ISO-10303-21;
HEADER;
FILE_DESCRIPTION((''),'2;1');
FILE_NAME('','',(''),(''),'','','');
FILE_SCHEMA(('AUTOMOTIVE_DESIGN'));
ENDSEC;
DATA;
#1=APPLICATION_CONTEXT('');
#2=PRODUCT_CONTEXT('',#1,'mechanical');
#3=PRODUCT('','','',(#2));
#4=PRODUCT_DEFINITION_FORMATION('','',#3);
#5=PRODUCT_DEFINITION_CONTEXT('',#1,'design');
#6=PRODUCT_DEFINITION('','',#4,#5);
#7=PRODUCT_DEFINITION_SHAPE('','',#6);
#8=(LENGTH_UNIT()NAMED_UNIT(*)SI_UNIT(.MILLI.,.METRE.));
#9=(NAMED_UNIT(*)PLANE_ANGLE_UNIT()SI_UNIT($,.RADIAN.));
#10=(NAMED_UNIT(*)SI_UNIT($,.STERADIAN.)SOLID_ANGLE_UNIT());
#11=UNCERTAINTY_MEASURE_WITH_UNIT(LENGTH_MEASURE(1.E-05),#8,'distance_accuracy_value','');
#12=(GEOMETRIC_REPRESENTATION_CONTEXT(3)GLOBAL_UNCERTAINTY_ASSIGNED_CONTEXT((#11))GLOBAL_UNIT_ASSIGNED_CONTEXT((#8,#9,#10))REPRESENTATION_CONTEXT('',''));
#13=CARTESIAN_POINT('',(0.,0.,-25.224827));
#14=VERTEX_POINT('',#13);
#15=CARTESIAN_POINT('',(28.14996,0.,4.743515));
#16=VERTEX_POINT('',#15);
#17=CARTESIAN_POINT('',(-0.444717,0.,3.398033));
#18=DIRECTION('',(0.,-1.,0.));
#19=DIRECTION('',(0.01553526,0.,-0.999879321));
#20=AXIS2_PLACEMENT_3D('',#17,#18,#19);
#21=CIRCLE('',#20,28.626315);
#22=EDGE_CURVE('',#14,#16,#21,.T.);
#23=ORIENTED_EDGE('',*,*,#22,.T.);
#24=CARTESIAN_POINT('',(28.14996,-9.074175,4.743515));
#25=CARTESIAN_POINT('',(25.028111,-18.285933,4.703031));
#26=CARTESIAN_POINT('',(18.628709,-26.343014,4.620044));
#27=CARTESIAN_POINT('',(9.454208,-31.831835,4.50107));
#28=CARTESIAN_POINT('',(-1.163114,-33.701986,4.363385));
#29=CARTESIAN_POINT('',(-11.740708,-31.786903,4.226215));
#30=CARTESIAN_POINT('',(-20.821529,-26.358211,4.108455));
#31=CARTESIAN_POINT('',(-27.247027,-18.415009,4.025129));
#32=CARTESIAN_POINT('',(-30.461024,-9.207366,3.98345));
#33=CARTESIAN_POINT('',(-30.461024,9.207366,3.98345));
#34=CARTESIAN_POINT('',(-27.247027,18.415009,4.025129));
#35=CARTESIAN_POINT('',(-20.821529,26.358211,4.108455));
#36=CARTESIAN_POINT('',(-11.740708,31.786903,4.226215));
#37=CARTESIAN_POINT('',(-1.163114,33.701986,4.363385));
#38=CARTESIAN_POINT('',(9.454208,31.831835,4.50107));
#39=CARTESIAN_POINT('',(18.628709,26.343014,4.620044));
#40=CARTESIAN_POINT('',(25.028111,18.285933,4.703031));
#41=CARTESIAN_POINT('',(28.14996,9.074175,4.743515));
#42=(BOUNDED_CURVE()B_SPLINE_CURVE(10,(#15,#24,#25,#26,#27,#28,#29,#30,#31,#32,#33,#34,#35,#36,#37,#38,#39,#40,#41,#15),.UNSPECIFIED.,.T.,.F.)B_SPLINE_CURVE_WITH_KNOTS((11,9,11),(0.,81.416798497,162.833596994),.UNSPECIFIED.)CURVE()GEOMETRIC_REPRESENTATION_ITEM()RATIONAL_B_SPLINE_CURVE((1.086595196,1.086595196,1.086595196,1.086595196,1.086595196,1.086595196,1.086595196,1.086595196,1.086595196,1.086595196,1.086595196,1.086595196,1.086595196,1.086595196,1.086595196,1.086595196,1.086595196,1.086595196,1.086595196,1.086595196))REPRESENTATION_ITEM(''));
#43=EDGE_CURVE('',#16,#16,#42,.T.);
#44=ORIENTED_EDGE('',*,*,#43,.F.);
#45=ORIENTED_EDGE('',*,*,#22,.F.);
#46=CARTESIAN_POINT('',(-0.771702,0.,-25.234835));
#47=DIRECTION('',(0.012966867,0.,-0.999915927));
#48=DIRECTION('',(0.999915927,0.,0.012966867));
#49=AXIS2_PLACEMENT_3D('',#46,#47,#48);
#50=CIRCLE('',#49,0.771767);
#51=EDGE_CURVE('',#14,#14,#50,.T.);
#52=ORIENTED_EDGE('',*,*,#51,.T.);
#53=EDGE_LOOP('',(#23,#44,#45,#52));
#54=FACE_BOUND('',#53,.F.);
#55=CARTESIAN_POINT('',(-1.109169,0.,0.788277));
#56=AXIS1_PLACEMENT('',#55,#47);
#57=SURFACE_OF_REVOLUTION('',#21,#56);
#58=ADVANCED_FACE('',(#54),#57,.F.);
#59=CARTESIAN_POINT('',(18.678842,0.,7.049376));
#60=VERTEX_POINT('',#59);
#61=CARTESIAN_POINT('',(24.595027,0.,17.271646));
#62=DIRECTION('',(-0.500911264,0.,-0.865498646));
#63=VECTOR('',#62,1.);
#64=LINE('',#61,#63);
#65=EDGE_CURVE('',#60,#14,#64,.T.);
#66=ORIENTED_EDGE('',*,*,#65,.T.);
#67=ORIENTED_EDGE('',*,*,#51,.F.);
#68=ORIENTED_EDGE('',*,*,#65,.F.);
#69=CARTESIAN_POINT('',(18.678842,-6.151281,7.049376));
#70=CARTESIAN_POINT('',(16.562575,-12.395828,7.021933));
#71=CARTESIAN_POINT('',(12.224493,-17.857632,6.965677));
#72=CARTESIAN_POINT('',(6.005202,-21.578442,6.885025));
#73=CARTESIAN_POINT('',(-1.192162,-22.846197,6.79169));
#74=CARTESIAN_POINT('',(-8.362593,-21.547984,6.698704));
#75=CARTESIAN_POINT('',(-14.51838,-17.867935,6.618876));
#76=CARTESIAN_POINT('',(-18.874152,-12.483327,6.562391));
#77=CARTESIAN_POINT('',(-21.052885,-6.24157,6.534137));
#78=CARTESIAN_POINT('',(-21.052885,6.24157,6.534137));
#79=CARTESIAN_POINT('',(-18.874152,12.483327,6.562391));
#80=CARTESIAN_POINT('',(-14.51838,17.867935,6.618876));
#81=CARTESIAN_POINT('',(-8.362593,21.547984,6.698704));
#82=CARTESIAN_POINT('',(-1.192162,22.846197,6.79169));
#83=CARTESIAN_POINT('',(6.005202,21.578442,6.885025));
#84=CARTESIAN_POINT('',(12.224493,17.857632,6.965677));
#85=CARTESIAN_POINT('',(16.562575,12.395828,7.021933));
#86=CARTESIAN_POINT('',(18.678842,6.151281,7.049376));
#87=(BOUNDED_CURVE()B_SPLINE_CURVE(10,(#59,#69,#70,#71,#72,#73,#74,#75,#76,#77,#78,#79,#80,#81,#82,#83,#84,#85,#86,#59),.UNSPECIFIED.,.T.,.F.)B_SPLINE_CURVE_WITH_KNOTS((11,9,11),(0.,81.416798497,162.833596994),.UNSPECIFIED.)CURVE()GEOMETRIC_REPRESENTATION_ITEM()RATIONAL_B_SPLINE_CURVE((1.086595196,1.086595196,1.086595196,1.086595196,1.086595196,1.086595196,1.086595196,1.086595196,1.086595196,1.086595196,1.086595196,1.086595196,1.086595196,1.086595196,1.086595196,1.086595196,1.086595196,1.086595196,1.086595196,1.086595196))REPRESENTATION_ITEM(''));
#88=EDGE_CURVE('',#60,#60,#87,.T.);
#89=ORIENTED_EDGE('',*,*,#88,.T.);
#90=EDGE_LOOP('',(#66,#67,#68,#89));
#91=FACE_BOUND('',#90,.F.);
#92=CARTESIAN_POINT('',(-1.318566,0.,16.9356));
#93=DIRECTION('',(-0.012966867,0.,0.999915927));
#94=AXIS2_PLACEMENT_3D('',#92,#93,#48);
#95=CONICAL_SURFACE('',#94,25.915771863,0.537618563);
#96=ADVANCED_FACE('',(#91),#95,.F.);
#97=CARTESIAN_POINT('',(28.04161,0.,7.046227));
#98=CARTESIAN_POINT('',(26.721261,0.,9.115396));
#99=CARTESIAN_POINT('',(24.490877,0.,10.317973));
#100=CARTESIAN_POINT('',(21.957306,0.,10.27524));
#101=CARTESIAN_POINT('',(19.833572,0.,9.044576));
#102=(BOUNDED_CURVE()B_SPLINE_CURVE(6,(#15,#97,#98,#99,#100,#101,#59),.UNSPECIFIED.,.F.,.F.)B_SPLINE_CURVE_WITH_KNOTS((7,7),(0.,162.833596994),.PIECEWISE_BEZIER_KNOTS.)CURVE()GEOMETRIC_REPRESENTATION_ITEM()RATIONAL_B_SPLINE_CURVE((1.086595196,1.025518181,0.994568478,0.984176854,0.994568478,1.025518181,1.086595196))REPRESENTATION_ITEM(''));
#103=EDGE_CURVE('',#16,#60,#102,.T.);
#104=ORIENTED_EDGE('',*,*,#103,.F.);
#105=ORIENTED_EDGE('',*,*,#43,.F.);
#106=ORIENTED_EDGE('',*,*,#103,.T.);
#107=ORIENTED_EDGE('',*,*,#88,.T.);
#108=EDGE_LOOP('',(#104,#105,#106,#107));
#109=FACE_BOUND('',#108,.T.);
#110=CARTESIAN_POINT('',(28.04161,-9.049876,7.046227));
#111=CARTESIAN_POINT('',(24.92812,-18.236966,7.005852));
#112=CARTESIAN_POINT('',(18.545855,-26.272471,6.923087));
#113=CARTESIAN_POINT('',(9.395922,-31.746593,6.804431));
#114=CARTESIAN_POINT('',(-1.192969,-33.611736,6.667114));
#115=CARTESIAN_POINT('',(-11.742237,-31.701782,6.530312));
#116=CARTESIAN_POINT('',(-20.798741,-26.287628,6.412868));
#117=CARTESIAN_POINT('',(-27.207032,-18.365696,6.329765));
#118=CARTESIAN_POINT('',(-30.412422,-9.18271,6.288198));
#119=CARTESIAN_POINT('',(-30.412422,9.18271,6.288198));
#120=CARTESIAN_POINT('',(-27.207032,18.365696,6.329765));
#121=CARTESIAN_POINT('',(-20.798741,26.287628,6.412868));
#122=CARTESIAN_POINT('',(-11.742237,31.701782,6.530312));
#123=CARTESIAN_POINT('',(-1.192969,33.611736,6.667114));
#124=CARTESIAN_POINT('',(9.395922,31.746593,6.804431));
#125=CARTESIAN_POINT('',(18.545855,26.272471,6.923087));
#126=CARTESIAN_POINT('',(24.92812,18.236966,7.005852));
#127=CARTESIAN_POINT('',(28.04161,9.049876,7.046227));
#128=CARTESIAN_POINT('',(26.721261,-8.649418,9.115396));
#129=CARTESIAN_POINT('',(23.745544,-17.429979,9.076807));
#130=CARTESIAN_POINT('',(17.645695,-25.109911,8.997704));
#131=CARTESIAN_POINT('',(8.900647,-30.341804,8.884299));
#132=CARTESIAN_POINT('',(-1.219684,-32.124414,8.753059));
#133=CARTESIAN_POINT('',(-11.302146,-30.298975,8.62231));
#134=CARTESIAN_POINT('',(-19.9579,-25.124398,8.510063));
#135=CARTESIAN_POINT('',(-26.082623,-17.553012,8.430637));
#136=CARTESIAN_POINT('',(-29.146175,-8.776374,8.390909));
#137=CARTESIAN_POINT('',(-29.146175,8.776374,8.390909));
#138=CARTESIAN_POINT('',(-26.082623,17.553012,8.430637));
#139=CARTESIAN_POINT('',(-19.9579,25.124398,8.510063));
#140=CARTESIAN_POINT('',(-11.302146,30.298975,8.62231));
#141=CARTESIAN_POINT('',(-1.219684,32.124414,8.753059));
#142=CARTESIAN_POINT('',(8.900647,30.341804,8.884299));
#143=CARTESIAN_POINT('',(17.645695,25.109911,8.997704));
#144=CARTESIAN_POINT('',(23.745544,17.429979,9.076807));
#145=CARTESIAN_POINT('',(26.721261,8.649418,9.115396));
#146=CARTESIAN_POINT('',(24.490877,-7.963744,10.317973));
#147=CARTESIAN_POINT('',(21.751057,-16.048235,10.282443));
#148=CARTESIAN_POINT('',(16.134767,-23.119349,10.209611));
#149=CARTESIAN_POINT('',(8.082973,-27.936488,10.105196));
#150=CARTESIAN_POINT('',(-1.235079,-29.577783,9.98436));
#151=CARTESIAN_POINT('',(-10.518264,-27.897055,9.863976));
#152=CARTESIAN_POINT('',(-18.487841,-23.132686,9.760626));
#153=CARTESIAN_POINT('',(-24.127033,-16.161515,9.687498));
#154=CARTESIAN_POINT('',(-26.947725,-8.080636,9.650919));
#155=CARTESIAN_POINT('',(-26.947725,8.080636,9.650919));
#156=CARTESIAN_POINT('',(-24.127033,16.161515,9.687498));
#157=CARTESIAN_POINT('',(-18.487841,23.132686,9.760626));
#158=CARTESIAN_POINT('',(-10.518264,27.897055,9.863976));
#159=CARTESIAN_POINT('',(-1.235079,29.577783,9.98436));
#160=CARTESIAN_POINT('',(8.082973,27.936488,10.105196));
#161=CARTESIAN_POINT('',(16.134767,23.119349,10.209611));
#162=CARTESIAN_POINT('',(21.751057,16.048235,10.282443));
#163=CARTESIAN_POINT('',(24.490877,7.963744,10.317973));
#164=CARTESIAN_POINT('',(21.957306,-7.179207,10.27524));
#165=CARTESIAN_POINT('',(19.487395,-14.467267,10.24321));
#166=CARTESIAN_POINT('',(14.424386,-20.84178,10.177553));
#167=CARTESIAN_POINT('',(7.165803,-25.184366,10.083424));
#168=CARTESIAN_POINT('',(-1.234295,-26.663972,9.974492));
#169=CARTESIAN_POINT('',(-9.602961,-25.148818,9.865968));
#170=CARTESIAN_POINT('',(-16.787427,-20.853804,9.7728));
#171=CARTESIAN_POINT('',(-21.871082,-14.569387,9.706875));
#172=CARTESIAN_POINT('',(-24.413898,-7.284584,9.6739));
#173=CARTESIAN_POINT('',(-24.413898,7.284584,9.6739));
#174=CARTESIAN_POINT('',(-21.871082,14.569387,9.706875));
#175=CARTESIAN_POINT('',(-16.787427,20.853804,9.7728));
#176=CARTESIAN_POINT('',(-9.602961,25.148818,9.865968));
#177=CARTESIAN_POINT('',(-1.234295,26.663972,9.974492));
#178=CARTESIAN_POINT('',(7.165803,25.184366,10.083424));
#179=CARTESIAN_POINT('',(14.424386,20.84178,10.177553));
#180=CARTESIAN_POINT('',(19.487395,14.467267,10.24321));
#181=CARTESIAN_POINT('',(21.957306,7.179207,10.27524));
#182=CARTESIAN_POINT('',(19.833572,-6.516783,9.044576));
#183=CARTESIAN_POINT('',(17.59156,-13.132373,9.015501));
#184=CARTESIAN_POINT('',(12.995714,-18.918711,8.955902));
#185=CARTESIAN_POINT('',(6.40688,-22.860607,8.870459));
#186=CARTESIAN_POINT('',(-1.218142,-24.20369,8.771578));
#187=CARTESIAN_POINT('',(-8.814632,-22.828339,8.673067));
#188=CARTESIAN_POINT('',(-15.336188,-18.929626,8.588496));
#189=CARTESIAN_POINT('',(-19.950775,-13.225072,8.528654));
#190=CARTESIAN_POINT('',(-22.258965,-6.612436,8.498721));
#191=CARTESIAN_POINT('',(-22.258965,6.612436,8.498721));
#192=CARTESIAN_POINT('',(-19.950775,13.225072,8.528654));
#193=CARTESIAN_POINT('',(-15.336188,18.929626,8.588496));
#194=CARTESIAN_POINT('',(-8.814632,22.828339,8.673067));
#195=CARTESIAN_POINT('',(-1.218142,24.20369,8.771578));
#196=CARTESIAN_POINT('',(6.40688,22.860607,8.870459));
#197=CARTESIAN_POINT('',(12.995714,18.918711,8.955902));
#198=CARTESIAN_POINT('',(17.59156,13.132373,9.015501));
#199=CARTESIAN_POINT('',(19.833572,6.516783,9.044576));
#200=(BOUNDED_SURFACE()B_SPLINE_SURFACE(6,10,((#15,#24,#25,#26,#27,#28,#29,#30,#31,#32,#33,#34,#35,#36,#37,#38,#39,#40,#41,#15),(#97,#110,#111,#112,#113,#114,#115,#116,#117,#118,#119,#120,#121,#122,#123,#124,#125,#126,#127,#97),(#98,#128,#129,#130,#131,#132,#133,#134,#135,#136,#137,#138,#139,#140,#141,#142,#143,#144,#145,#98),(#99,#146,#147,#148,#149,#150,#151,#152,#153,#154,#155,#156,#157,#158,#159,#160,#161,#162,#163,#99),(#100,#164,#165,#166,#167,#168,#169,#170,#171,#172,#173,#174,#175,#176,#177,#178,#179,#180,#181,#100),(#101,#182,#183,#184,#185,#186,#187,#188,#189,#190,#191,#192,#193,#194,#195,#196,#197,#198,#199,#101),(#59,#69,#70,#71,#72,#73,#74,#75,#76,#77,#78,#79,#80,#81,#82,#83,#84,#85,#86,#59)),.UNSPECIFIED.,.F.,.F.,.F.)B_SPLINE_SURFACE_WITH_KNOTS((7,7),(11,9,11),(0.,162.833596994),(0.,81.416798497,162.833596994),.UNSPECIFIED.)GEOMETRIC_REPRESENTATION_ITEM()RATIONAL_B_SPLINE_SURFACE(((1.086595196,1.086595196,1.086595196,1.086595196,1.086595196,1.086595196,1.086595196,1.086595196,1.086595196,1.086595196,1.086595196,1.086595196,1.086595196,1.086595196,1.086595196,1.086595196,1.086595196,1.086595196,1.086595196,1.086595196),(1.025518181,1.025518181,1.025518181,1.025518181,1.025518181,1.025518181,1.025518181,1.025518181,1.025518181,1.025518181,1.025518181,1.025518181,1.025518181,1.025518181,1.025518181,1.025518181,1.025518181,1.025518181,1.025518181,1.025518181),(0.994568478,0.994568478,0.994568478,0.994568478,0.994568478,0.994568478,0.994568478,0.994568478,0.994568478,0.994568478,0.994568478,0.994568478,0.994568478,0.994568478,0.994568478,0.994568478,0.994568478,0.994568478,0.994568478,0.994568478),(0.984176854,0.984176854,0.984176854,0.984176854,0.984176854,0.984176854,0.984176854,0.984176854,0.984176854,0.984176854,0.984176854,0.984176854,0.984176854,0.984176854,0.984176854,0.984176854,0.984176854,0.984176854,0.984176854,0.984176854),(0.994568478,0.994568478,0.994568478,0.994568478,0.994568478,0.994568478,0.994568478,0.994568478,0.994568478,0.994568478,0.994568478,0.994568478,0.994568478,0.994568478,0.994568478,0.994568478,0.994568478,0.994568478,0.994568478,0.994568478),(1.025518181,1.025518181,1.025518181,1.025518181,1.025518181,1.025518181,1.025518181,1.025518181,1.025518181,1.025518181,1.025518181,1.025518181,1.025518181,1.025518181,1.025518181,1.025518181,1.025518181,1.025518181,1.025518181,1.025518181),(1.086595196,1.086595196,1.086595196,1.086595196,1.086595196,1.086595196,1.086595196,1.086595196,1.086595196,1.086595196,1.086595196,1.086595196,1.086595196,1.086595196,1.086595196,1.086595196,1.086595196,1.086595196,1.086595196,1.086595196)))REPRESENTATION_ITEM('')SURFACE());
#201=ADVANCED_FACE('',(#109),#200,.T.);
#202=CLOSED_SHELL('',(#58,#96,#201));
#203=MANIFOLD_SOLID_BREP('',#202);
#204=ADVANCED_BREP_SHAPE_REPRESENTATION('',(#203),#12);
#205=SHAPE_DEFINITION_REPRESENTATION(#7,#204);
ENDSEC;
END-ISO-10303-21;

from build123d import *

# Parameters (mm, degrees)
F2_R = 5.08


with BuildPart() as f1:
    # F0 (on Front) → F1 (revolve)
    with BuildSketch(Plane.XZ):
        with BuildLine():
            ThreePointArc((0, -25.22482723), (24.331319664, -10.9412104356), (24.5950266565, 17.271646278))
            Line((24.5950266565, 17.271646278), (0, -25.22482723))
        make_face()
    revolve(axis=Axis((-1.1091685811, 0, 0.7882770151), (0.0129668674, 0, -0.9999159266)))

    # F2
    f2_edges = [f1.edges().sort_by_distance(p)[0] for p in [
        (-27.232159, 0, 16.599554),
    ]]
    fillet(f2_edges, radius=F2_R)


solid = f1.part
